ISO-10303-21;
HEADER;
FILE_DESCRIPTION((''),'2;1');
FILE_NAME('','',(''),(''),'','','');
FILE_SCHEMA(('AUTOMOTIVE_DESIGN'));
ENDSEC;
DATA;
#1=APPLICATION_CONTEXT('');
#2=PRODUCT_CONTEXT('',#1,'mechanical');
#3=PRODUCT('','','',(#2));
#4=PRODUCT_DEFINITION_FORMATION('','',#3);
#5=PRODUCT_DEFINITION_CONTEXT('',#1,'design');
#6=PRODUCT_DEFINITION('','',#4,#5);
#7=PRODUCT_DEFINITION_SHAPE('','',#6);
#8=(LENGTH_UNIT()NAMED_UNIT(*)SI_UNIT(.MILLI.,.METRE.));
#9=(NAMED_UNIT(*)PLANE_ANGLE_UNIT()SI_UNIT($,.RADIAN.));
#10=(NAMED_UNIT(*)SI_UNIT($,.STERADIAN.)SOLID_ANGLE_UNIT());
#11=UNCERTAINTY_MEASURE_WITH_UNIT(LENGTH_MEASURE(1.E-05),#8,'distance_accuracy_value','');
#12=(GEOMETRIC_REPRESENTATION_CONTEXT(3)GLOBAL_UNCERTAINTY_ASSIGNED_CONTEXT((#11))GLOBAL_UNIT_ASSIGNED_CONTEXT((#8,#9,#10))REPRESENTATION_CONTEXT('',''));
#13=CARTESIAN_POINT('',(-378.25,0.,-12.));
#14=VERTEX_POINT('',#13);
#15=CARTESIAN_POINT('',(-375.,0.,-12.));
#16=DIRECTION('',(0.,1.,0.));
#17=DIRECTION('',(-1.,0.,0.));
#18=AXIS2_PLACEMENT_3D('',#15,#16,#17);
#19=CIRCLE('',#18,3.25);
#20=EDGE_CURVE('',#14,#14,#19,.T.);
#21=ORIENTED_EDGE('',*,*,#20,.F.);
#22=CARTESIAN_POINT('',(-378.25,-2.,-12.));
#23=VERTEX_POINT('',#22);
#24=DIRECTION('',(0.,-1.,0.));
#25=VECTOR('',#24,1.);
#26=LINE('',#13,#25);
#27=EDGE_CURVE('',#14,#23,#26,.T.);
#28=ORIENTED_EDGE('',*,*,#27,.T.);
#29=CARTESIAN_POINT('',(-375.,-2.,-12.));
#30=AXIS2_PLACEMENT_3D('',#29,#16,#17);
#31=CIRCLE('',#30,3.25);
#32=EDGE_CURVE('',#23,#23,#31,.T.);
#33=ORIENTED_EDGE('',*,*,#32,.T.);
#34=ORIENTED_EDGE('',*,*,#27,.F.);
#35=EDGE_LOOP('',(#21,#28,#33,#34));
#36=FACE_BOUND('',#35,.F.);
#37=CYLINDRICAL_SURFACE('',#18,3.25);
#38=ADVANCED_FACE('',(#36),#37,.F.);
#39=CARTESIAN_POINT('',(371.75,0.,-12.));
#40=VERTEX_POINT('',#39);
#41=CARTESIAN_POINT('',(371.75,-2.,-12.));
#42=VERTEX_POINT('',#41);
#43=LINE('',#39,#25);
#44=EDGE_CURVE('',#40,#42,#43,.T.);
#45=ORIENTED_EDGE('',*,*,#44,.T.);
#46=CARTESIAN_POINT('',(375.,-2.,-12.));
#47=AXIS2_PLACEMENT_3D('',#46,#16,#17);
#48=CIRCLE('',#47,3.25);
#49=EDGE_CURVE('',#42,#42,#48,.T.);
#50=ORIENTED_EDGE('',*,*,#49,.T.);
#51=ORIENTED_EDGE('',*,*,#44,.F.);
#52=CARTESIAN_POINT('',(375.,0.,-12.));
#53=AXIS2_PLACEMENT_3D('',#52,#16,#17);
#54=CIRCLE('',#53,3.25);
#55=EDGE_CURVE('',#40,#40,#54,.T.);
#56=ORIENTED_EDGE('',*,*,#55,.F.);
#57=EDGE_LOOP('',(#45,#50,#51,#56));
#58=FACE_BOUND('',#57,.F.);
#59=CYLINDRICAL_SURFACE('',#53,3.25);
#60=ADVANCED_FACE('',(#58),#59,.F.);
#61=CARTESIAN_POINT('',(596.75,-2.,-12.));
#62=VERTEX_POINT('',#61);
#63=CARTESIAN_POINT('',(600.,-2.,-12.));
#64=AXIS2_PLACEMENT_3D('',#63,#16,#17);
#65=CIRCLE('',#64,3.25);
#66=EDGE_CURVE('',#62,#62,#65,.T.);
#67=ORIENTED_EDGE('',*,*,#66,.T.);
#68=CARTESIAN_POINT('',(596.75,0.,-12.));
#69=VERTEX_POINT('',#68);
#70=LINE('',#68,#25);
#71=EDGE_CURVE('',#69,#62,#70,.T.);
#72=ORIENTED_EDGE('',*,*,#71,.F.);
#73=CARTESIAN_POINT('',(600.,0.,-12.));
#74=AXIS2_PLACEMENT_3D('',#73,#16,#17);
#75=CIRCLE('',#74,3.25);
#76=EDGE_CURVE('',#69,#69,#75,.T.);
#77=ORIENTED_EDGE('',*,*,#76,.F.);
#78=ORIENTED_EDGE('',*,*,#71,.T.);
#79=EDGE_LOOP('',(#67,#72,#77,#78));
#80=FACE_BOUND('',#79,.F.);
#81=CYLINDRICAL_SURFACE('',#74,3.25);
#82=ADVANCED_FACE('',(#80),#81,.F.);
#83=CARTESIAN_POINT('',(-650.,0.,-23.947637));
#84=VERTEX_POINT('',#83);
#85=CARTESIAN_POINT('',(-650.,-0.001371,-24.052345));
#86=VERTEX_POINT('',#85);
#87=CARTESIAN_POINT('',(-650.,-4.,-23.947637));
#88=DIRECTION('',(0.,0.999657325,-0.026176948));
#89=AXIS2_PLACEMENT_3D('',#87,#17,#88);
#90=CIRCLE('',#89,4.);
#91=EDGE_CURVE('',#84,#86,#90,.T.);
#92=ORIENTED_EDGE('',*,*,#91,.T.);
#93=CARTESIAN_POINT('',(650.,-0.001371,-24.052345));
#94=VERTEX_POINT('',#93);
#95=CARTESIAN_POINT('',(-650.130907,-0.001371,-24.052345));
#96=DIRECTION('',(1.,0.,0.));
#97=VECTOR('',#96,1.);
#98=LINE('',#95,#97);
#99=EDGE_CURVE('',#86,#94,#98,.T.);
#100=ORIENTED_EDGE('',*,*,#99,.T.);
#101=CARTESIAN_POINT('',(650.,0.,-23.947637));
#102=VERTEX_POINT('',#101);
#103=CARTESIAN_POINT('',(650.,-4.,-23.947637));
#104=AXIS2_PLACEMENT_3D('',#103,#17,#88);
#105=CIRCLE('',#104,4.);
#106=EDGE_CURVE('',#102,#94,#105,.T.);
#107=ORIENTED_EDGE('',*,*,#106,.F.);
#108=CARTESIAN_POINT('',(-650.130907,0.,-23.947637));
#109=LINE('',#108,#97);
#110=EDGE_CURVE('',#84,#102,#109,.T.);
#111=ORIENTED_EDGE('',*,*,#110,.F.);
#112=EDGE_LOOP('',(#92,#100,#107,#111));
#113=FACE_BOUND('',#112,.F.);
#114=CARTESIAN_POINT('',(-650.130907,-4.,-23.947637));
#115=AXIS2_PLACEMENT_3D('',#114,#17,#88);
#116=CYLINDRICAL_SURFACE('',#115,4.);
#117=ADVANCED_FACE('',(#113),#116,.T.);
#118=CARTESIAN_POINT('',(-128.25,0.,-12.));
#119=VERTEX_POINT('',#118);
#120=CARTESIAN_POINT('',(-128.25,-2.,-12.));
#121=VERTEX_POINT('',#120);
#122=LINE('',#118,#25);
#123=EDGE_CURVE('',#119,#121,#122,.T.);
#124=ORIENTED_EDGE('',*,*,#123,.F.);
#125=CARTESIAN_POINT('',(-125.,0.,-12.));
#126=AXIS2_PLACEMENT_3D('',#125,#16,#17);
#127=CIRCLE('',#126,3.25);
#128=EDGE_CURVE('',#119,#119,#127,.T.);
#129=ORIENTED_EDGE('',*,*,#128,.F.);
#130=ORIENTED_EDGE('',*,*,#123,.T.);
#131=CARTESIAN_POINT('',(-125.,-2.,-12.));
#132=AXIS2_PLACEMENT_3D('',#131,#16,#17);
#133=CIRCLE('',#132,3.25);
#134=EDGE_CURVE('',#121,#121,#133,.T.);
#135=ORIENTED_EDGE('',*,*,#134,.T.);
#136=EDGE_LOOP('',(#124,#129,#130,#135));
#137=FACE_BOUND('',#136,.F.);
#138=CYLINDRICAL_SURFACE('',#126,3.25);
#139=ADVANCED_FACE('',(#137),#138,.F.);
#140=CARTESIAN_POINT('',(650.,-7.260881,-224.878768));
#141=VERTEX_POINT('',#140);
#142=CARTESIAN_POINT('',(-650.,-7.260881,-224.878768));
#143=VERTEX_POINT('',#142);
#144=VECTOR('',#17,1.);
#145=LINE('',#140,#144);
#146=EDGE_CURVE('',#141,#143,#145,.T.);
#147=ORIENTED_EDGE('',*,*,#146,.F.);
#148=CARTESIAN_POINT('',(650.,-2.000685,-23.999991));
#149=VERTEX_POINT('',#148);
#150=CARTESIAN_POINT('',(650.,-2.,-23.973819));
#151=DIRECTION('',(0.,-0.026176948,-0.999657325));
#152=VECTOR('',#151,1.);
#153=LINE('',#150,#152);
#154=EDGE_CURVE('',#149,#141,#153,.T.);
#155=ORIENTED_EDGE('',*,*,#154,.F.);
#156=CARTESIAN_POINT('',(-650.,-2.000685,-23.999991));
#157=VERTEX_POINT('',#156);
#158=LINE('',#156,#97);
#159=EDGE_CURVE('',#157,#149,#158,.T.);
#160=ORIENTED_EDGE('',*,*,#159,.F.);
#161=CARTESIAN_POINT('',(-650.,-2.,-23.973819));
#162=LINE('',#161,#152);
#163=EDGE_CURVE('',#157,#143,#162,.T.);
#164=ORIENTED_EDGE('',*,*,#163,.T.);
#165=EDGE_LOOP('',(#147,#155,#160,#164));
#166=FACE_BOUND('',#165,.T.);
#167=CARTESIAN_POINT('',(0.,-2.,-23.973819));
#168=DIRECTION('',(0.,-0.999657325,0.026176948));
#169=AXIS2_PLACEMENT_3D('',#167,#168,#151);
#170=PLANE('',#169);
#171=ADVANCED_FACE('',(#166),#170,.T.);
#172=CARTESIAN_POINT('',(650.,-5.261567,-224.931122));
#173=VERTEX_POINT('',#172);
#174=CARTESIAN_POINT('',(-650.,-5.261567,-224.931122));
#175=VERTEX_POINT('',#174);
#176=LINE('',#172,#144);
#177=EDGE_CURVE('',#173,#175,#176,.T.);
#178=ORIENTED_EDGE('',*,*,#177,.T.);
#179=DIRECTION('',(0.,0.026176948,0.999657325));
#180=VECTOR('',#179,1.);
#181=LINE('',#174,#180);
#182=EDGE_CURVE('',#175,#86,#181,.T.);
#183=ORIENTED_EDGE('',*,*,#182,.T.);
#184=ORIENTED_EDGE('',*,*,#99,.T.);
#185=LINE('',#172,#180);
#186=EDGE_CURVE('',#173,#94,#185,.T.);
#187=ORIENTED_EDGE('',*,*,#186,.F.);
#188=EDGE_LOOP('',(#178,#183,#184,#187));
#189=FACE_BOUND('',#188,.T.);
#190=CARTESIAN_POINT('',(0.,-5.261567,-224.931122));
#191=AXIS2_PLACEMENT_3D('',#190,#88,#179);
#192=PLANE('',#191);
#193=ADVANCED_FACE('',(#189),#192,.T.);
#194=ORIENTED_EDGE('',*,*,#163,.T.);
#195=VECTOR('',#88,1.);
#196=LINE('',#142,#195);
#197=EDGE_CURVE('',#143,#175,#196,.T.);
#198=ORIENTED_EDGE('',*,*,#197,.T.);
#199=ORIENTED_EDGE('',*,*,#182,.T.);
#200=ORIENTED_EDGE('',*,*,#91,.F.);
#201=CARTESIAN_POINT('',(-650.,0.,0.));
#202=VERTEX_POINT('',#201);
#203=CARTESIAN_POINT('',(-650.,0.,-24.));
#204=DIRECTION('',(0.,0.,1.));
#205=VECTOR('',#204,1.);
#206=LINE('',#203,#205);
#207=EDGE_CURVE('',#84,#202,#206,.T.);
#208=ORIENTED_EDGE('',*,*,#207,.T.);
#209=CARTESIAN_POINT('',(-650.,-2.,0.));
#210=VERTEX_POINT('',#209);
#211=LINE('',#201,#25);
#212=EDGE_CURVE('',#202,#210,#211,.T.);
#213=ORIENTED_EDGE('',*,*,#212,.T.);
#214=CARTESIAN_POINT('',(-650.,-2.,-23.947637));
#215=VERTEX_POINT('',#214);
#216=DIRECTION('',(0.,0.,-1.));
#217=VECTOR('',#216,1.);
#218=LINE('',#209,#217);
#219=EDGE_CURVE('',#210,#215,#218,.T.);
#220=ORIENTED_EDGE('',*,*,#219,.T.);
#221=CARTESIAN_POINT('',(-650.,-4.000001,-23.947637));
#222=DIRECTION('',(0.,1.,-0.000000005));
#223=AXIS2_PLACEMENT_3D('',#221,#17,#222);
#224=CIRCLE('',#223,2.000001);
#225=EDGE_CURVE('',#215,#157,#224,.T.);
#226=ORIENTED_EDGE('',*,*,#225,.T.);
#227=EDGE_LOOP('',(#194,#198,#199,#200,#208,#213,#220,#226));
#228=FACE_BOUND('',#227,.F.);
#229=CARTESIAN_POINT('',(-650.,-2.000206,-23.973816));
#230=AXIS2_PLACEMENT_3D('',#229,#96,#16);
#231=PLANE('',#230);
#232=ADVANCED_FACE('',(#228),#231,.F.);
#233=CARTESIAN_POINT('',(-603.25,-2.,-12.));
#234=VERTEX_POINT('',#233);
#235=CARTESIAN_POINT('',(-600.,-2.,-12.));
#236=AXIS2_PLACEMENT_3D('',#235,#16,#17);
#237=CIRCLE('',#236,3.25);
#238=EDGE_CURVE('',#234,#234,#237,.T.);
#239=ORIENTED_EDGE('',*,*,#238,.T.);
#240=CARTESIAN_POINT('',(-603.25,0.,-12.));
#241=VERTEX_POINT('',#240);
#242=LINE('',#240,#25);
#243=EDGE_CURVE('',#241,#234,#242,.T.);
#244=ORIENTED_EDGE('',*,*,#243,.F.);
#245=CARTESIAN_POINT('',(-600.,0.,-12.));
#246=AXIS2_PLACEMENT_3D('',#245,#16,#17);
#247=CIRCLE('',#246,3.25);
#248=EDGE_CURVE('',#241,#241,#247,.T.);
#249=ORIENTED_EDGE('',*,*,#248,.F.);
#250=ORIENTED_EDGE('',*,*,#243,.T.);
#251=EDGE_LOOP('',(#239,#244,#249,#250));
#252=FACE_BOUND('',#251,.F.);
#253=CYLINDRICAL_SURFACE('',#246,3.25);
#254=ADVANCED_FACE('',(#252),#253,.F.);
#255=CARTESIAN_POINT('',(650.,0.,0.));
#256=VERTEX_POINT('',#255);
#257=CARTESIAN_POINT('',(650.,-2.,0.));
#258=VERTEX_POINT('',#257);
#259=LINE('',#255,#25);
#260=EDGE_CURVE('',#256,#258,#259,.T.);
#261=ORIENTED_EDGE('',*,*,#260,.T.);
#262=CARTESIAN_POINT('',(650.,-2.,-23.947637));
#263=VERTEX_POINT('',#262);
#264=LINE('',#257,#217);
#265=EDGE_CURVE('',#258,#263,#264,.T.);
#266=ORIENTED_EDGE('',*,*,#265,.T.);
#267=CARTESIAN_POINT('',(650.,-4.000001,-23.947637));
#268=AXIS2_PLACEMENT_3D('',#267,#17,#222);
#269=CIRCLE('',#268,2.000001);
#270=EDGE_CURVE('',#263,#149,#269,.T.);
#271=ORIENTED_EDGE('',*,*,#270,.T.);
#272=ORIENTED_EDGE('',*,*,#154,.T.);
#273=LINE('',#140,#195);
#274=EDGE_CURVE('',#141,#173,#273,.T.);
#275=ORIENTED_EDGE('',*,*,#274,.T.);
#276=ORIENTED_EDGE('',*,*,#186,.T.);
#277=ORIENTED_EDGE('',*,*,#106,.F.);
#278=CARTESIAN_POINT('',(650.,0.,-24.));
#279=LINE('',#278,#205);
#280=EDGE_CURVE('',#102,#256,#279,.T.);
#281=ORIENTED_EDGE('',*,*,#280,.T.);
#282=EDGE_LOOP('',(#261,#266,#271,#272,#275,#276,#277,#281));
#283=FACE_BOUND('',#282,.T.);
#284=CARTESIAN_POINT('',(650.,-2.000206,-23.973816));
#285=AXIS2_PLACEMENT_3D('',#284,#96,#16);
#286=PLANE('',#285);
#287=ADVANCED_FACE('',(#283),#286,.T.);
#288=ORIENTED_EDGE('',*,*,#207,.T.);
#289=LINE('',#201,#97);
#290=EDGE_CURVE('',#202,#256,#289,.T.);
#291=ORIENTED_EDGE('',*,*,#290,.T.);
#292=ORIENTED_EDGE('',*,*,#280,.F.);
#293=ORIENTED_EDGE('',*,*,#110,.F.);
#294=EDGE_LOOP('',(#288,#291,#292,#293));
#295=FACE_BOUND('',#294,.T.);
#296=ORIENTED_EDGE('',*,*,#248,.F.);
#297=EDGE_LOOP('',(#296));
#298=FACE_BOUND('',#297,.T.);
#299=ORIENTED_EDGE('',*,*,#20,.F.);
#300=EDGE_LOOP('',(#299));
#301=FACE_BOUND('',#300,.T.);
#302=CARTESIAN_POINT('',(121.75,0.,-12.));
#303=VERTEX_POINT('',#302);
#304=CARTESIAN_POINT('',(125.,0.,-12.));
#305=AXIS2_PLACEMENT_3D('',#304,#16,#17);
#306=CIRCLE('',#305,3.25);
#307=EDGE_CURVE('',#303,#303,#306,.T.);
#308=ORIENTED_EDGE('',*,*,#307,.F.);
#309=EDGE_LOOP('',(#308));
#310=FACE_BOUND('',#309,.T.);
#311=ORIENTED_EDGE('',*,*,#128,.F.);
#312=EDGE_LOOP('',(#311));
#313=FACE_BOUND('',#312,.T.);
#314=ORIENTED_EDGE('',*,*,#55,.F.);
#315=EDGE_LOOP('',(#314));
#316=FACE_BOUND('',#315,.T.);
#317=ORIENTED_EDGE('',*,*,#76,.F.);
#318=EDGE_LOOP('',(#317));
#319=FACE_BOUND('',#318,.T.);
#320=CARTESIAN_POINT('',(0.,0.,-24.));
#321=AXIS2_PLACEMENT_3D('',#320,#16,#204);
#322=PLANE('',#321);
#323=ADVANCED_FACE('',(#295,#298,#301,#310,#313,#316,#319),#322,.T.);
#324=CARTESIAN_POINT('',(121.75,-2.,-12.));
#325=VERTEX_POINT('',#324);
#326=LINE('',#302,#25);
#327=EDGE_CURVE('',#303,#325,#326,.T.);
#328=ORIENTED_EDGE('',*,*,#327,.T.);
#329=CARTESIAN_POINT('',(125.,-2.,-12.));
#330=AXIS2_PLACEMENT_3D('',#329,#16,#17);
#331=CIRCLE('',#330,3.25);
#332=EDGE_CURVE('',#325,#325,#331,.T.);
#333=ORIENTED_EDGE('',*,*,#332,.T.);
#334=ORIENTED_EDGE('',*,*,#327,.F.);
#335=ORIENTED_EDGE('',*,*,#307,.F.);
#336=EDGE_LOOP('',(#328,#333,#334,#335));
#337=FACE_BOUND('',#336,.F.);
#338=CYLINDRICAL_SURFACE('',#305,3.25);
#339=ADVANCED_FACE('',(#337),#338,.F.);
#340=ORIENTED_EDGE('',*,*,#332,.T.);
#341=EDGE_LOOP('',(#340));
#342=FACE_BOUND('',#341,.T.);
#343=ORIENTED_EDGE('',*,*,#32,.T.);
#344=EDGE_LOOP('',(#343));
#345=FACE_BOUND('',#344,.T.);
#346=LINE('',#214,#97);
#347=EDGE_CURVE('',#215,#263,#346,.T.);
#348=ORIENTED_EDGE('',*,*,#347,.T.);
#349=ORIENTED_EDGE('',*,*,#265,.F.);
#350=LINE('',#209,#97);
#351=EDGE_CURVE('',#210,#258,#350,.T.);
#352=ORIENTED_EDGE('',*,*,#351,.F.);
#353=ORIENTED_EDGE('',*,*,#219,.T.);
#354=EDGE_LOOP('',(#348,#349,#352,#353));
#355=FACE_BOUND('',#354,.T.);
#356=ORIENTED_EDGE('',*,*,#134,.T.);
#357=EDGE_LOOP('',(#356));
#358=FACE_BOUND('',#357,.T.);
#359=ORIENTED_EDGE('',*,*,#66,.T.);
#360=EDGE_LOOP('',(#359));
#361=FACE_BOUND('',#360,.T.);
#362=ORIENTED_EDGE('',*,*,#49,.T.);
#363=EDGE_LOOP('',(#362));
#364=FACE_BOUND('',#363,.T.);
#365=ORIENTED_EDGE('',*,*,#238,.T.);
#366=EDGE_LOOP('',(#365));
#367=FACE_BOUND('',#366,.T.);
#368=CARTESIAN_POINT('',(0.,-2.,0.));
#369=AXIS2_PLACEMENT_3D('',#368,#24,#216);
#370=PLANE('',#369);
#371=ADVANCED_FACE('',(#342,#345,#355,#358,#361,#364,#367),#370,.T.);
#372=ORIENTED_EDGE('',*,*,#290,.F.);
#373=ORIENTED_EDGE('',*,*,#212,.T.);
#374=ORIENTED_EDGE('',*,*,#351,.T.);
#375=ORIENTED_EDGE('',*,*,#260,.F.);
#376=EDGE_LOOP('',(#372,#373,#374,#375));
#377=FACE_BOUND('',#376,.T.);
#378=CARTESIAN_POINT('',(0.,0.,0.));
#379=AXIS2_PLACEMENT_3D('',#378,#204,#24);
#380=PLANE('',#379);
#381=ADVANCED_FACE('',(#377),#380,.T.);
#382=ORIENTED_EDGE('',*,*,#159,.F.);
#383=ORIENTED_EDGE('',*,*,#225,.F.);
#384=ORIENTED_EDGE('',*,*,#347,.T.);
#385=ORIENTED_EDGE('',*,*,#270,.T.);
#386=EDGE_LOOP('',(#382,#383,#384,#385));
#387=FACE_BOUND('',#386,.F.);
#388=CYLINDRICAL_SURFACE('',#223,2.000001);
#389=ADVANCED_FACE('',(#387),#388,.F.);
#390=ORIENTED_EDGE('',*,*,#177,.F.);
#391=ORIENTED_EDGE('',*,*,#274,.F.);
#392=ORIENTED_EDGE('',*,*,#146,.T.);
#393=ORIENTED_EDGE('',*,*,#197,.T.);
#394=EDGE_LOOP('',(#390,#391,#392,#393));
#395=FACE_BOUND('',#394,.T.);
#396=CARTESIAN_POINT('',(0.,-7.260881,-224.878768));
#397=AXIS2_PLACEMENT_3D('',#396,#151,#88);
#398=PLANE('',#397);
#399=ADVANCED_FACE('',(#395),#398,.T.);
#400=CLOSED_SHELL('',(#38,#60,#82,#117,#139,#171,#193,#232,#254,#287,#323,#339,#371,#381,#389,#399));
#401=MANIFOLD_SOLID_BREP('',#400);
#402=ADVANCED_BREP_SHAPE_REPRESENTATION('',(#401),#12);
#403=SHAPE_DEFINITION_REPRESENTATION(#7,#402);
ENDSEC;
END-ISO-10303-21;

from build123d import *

# Parameters (mm, degrees)
F1_DEPTH    = 650
F2_R        = 3.25
F3_DEPTH    = 25
F4_T1_DEPTH = 1300
F5_T1_DEPTH = 1300.2618143417


# Not quite as in the source:
# - a fillet or chamfer that OpenCascade refuses, or shapes differently, is made with other operations: its cross-section is extruded or revolved along the edge and cut away or added


with BuildPart() as f1:
    # F0 (on Right) → F1 (new body, symmetric)
    with BuildSketch(Plane.YZ):
        Polygon((0, -24), (0, 0), (-2, 0), (-2, -23.9738185658), (-7.2608812598, -224.8787684235), (-5.2615666099, -224.9311223201), align=None)
    extrude(amount=F1_DEPTH, both=True)

    # F2 (on face) → F3 (cut)
    with BuildSketch(Plane(origin=(0, 0, 0), x_dir=(-1, 0, 0), z_dir=(0, 1, 0))):
        with Locations((-600, -12)):
            Circle(F2_R)
        with Locations((-375, -12)):
            Circle(F2_R)
        with Locations((-125, -12)):
            Circle(F2_R)
        with Locations((600, -12)):
            Circle(F2_R)
        with Locations((375, -12)):
            Circle(F2_R)
        with Locations((125, -12)):
            Circle(F2_R)
    extrude(amount=-F3_DEPTH, mode=Mode.SUBTRACT)

    # F4: fillet of radius 2 on 1 edges, made by hand

    # F4_s2 → F4_t1 (join)
    with BuildSketch(Plane.YZ.offset(-650)):
        with BuildLine():
            ThreePointArc((-2, -23.9476371317), (-2.0001713449, -23.9738163228), (-2.00068535, -23.9999910283))
            Line((-2.00068535, -23.9999910283), (-2, -23.9738185658))
            Line((-2, -23.9738185658), (-2, -23.9476371317))
        make_face()
    extrude(amount=F4_T1_DEPTH)

    # F5: fillet of radius 4 on 1 edges, made by hand

    # F5_s2 → F5_t1 (cut)
    with BuildSketch(Plane.YZ.offset(-650.1309071708)):
        with BuildLine():
            ThreePointArc((-0.0013707001, -24.0523449249), (-0.0003426897, -23.9999955139), (0, -23.9476371317))
            Line((0, -23.9476371317), (0, -24))
            Line((0, -24), (-0.0013707001, -24.0523449249))
        make_face()
    extrude(amount=F5_T1_DEPTH, mode=Mode.SUBTRACT)


solid = f1.part
